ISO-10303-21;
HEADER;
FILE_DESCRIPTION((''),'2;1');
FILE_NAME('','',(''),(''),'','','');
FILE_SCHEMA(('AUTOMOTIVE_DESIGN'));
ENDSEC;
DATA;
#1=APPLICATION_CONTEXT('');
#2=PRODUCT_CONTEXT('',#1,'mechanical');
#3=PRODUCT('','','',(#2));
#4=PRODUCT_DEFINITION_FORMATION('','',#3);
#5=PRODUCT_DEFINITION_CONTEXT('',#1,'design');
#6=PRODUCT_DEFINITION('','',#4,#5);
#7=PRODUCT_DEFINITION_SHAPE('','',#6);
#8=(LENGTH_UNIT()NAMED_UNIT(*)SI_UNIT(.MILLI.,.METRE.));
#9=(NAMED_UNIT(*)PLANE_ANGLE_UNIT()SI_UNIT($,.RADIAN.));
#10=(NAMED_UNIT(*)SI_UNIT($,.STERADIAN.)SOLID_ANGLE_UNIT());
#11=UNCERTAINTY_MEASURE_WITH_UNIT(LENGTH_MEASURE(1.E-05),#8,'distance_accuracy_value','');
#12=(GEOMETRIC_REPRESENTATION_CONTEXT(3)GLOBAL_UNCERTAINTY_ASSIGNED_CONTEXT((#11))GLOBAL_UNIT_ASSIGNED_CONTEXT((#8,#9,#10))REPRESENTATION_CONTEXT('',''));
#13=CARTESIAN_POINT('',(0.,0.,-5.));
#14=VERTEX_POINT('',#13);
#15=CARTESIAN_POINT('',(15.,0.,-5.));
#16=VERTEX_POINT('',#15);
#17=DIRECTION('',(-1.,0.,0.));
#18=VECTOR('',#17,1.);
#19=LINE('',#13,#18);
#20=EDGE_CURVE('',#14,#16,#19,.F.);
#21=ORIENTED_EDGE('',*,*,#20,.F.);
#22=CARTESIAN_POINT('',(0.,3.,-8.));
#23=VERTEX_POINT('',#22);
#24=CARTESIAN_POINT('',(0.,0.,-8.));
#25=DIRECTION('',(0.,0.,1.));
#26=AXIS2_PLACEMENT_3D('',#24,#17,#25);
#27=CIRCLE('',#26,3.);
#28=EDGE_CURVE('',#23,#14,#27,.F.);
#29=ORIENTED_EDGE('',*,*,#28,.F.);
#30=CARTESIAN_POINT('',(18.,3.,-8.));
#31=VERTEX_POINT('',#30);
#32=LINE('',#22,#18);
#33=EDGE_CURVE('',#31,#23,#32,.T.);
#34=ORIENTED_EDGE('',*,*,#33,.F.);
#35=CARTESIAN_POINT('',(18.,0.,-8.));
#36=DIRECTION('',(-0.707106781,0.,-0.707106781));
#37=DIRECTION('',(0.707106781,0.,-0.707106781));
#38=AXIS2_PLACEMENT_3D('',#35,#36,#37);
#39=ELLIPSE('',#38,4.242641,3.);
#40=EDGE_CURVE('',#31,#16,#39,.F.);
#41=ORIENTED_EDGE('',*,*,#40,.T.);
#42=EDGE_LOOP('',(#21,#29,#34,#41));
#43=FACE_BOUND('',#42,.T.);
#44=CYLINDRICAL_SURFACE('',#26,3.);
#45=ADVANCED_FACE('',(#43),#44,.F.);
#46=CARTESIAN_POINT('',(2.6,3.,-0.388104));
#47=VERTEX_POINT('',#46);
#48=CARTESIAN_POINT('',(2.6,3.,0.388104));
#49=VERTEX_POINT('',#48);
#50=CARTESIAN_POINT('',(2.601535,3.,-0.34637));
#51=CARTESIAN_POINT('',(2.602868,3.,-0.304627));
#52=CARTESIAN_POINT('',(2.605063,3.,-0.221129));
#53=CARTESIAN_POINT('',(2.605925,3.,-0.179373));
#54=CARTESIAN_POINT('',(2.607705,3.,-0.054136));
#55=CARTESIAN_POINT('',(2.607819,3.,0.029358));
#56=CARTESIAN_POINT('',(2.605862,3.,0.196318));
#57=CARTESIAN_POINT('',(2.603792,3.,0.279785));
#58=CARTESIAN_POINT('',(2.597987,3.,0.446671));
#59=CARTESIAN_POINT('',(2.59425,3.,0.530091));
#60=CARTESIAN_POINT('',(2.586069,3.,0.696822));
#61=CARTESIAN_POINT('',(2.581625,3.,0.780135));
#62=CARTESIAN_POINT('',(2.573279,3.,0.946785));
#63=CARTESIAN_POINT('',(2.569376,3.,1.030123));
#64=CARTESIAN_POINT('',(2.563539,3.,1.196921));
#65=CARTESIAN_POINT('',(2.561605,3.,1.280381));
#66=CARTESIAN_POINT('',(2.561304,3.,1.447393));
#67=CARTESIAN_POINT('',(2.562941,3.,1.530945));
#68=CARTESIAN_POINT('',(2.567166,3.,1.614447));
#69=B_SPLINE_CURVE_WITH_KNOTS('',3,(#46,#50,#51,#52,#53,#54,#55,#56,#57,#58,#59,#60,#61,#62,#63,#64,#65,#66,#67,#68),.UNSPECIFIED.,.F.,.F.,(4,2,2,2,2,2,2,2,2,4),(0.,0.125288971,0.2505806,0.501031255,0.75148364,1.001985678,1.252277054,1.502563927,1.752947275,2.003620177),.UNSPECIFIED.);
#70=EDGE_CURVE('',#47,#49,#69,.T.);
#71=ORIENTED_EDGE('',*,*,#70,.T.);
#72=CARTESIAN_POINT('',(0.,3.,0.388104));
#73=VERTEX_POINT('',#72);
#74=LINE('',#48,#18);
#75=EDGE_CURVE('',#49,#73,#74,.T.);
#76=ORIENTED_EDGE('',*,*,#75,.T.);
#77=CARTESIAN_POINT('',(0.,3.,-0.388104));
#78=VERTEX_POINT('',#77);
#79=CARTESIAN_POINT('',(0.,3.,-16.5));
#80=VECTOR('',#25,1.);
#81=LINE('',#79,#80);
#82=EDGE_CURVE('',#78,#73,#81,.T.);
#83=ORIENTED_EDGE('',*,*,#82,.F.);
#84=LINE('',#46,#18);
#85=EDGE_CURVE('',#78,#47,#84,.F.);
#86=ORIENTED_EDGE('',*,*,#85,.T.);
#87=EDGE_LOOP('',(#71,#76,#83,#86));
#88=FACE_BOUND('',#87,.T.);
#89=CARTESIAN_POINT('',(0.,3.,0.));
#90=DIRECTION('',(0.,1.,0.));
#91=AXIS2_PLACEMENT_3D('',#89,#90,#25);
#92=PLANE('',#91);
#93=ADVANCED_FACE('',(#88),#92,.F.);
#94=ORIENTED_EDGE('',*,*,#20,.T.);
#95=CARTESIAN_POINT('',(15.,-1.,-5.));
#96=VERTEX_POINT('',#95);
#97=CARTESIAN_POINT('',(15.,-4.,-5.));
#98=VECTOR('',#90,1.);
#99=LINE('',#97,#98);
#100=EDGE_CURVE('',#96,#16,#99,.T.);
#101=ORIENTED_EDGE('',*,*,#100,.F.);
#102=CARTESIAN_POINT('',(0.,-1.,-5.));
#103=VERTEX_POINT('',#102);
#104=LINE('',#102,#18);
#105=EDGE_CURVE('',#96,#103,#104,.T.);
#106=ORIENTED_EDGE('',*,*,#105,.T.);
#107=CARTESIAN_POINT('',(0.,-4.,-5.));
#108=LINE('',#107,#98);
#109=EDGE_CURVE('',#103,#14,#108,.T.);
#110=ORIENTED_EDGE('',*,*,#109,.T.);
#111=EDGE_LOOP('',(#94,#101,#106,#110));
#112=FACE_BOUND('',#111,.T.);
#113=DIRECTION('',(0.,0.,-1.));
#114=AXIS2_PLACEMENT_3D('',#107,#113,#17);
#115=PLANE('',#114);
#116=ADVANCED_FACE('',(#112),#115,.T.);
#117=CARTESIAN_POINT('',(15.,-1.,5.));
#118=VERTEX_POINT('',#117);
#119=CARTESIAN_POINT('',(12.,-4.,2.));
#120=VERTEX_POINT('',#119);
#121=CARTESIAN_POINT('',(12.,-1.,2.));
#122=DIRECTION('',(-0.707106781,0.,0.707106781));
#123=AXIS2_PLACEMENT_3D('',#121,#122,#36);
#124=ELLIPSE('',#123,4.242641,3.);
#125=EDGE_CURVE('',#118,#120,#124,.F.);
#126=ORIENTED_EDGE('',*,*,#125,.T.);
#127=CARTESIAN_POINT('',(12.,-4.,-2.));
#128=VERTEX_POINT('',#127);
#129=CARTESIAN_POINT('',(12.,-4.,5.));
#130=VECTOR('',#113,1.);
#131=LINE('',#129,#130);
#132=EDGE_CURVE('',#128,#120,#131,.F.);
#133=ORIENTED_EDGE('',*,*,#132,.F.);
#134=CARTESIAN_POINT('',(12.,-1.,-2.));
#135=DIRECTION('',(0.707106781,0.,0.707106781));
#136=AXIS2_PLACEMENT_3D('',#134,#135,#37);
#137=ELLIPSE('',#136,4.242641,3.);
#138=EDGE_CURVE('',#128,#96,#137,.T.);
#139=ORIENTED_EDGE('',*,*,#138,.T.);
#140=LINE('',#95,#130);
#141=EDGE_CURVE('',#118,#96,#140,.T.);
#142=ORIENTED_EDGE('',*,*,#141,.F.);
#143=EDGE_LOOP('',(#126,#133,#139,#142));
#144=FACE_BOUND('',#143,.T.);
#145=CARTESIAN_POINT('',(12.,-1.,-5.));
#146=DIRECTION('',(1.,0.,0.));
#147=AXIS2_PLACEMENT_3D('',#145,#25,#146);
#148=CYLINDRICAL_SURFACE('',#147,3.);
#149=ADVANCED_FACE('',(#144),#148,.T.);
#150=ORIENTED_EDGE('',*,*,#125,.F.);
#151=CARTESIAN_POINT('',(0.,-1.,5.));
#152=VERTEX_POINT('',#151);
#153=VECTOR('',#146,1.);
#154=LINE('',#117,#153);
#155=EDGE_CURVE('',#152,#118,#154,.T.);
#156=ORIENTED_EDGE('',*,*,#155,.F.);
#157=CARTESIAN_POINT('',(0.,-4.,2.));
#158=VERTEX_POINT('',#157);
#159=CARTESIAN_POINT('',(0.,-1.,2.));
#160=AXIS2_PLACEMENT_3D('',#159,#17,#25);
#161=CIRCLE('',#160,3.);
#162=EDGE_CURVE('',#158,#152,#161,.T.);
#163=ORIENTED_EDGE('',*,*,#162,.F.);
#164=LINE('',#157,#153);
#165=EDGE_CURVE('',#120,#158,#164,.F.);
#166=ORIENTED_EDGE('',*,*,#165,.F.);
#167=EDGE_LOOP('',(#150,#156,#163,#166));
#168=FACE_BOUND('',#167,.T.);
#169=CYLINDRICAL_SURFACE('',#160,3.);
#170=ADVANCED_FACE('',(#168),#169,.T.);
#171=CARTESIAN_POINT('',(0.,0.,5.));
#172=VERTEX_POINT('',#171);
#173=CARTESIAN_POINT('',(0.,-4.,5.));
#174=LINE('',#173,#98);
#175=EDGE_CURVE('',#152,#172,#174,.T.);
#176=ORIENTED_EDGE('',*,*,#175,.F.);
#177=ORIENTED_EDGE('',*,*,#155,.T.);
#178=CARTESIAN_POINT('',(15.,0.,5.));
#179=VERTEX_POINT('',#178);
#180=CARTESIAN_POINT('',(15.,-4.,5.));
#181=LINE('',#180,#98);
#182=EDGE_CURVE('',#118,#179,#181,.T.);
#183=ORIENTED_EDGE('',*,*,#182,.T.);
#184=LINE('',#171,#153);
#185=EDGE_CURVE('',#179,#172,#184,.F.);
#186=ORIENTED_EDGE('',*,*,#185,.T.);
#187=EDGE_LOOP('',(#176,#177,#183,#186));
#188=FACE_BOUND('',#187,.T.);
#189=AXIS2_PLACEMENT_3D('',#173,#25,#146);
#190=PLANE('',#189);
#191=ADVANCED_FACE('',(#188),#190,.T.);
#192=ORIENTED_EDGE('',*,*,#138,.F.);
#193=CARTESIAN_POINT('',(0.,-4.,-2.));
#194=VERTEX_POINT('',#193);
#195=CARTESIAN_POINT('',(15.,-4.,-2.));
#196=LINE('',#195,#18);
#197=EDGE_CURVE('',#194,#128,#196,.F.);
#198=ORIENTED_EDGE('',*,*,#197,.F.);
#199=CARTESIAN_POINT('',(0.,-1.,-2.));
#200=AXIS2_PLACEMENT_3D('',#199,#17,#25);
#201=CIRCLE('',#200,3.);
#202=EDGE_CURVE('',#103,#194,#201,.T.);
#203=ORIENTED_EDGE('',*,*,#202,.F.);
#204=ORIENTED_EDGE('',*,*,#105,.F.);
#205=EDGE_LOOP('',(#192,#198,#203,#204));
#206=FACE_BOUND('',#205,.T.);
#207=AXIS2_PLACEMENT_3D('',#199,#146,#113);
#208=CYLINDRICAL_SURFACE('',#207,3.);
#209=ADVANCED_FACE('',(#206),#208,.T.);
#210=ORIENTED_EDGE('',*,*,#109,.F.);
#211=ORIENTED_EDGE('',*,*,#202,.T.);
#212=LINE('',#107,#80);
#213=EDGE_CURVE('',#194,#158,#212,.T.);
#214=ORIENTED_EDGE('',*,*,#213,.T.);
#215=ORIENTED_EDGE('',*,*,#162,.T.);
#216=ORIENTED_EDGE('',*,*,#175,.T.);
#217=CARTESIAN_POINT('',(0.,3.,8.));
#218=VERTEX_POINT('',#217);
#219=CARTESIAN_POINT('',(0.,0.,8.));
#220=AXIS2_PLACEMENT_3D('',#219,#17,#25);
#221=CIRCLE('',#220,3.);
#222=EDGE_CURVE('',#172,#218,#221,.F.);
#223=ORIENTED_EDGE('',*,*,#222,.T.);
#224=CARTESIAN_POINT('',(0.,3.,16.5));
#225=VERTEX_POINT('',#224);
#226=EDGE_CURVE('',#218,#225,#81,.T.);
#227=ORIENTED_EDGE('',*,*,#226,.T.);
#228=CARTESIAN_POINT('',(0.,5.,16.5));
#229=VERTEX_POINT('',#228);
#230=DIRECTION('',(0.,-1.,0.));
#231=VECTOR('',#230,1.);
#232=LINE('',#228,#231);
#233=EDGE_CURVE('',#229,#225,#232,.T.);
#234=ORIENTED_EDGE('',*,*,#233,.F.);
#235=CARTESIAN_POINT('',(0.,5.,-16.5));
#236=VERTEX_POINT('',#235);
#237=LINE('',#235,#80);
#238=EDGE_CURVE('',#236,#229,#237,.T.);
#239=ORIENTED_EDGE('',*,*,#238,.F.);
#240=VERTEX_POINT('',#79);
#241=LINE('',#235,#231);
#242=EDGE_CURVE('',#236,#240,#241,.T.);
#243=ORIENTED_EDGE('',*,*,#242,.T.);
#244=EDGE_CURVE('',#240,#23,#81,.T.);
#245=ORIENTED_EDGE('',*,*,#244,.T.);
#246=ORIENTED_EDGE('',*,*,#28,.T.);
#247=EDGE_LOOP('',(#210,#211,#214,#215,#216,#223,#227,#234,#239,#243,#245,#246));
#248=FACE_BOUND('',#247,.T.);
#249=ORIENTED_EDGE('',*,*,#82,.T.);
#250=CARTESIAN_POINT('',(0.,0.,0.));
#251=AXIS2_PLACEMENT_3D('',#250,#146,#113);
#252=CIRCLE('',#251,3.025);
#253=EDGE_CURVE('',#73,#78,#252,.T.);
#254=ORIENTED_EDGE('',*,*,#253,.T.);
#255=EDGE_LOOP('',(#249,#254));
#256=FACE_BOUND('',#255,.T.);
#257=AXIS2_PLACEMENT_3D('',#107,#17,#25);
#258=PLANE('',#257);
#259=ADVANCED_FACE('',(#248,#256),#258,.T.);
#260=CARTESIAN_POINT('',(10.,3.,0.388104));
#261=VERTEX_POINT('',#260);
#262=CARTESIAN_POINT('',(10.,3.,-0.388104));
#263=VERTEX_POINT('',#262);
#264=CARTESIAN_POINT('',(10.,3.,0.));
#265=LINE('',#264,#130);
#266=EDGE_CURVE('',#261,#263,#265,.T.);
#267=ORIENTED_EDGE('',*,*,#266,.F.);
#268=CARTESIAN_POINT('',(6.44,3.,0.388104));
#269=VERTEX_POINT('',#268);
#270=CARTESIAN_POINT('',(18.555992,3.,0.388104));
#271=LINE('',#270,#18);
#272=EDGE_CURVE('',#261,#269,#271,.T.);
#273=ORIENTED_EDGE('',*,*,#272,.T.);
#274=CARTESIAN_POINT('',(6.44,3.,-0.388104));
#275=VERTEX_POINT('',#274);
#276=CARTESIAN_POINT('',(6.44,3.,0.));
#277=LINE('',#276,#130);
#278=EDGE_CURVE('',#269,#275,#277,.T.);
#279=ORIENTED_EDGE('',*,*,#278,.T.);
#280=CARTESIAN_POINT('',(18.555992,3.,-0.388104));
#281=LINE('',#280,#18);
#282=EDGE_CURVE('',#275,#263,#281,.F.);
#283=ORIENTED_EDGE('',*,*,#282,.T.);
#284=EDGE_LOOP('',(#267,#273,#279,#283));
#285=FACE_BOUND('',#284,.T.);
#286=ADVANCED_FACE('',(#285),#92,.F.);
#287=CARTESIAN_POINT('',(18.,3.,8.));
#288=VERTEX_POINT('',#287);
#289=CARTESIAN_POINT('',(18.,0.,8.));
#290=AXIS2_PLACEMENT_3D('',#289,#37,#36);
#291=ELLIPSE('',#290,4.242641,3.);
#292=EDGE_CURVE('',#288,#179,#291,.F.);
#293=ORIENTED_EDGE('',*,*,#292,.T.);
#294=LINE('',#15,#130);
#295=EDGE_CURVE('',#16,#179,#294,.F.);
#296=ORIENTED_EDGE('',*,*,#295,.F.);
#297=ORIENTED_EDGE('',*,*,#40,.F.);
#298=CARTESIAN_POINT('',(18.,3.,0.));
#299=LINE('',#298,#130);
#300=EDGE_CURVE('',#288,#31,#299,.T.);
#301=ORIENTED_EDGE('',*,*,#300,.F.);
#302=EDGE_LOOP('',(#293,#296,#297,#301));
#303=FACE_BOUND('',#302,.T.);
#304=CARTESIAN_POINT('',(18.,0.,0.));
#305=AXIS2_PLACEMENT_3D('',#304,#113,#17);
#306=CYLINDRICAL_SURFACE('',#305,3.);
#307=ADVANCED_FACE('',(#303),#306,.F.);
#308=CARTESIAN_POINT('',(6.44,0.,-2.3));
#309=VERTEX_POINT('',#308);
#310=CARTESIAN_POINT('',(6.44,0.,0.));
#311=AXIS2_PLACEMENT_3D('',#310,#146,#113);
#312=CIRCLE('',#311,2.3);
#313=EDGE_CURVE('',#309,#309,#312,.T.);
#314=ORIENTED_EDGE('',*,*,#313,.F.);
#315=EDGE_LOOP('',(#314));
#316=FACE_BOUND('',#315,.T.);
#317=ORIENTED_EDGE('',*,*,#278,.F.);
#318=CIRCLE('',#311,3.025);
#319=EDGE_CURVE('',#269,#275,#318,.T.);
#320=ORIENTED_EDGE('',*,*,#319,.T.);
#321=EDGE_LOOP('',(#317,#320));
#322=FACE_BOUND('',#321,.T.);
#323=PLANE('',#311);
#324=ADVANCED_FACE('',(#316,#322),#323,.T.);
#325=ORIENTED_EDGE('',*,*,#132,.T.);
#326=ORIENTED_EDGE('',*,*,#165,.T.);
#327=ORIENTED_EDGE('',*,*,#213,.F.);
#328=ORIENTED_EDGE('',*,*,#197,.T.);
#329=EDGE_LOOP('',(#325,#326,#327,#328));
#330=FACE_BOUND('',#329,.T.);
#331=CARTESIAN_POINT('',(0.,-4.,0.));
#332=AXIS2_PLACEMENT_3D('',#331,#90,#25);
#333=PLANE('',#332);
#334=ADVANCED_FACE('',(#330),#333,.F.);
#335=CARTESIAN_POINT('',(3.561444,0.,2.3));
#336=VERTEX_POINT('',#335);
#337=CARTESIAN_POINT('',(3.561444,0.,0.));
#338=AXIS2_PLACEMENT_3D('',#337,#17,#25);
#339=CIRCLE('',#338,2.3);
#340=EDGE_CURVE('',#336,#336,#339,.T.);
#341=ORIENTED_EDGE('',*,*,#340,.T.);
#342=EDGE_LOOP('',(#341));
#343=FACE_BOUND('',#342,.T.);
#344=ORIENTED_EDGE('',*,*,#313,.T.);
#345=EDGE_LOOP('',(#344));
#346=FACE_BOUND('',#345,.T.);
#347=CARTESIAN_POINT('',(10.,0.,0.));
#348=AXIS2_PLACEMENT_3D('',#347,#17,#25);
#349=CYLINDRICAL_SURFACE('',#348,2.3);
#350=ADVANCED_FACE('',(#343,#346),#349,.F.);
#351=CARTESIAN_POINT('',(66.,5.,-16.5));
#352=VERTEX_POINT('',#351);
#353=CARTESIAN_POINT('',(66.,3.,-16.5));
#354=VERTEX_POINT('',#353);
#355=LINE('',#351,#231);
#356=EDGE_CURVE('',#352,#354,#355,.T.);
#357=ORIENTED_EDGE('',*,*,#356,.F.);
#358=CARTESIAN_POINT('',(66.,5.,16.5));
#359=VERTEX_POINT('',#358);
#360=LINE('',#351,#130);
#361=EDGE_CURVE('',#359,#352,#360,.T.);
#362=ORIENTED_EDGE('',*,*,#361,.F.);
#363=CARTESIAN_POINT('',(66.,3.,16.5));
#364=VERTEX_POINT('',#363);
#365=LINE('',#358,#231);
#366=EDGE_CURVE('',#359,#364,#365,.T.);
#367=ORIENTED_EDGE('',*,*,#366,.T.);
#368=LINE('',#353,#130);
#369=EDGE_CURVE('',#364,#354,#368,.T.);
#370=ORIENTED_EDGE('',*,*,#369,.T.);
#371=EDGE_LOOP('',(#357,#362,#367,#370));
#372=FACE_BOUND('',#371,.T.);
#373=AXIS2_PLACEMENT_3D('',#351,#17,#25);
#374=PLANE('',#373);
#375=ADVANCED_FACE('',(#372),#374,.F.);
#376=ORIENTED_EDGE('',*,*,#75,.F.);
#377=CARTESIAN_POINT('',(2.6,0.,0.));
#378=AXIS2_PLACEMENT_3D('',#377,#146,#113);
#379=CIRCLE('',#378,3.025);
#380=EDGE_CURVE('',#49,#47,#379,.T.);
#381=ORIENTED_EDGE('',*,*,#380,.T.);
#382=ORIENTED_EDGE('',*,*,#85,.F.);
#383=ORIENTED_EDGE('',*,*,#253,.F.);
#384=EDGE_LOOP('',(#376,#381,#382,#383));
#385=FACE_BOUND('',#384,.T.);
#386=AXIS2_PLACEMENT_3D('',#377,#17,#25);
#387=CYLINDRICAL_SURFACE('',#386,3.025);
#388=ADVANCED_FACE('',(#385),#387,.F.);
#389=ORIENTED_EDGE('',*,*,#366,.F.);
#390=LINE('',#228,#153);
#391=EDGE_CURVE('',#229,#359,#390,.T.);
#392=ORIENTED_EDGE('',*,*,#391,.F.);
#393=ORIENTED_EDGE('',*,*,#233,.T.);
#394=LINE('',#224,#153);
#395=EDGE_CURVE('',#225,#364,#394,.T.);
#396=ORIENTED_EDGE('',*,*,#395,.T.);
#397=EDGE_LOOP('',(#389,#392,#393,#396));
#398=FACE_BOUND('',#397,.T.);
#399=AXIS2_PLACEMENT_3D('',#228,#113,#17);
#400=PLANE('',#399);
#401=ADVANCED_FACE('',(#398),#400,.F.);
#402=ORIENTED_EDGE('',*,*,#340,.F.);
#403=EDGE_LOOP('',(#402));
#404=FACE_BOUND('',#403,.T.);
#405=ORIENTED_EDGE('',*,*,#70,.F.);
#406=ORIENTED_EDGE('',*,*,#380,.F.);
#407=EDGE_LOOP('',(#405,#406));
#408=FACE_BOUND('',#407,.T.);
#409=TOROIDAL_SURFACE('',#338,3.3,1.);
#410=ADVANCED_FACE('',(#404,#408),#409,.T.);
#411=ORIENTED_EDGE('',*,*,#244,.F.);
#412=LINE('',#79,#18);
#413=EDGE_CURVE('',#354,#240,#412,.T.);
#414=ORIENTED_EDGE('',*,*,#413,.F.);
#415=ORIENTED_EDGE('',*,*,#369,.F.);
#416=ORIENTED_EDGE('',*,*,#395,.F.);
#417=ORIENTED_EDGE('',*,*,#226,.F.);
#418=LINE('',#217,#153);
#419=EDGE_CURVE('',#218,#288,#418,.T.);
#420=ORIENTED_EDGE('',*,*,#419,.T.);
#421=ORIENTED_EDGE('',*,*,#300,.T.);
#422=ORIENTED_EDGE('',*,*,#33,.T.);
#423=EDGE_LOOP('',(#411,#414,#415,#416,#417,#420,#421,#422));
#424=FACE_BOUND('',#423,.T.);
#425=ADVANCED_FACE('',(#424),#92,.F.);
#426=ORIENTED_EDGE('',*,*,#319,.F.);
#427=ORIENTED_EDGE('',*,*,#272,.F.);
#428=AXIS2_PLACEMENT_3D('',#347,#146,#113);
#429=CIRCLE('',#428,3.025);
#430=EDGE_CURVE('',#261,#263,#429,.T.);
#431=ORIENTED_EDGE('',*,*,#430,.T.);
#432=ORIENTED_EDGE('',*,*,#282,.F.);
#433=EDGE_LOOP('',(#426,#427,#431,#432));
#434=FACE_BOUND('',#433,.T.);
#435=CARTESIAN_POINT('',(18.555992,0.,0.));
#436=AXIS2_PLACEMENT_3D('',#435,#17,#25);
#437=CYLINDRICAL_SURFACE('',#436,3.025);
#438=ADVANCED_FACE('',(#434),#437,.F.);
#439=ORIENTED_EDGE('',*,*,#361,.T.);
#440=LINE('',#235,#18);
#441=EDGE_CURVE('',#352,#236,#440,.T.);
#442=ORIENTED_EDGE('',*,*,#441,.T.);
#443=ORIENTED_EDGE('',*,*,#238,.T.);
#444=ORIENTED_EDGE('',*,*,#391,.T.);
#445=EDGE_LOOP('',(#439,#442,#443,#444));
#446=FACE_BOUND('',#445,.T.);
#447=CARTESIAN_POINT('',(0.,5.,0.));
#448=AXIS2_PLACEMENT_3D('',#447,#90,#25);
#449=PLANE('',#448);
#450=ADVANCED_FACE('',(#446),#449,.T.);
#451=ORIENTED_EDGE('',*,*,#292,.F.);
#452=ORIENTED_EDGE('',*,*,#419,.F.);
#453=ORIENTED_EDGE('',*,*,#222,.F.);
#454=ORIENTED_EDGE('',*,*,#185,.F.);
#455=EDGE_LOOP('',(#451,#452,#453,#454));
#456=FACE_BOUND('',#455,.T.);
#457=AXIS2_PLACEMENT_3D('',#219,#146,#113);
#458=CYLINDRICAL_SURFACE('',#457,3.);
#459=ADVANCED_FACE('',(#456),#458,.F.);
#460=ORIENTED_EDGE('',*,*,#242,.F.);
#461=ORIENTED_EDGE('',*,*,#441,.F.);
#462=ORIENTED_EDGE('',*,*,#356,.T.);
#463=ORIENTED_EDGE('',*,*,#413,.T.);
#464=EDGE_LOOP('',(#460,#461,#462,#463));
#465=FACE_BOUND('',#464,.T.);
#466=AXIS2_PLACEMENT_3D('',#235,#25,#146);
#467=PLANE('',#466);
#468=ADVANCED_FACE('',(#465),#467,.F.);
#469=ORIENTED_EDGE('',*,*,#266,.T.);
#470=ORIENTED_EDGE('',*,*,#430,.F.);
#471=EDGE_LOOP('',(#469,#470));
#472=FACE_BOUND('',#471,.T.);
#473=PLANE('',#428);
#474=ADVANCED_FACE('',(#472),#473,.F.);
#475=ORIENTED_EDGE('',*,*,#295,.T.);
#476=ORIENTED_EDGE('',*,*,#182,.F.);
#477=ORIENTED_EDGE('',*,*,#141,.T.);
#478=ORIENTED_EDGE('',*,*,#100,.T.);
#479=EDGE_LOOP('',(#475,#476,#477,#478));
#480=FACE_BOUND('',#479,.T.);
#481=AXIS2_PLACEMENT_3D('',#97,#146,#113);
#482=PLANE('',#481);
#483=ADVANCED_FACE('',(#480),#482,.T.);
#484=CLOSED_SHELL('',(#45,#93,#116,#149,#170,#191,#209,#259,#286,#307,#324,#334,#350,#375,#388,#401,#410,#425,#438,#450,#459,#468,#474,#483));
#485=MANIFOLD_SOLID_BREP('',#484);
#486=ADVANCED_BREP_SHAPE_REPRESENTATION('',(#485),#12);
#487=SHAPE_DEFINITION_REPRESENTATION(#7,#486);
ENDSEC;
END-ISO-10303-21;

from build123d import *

# Parameters (mm, degrees)
BOSS_EXTRUDE1_DEPTH      = 3
BOSS_EXTRUDE1_DEPTH_BACK = 4
SKETCH1_W                = 15
SKETCH1_H                = 10
SKETCH2_R                = 2.3
CUT_EXTRUDE3_DEPTH       = 10
SKETCH2_4_R              = 3.025
SKETCH2_4_R_2            = 2.3
CUT_EXTRUDE4_DEPTH       = 2.6
CUT_EXTRUDE5_START       = 6.44
SKETCH2_5_R              = 3.025
SKETCH2_5_R_2            = 2.3
CUT_EXTRUDE5_DEPTH       = 3.56
SKETCH3_W                = 66
SKETCH3_H                = 33
BOSS_EXTRUDE2_DEPTH      = 2
FILLET2_R                = 3
FILLET3_R                = 3


with BuildPart() as part:
    # Sketch1 → Boss-Extrude1 (new, two sides: drawn at the far end of the back side and taken through both)
    with BuildSketch(Plane(origin=(0, 0, 0), x_dir=(1, 0, 0), z_dir=(0, 1, 0)).offset(-BOSS_EXTRUDE1_DEPTH_BACK)):
        with Locations((7.5, 0)):
            Rectangle(SKETCH1_W, SKETCH1_H)
    extrude(amount=BOSS_EXTRUDE1_DEPTH + BOSS_EXTRUDE1_DEPTH_BACK)

    # Sketch2 → Cut-Extrude3 (cut)
    with BuildSketch(Plane(origin=(0, 0, 0), x_dir=(0, 0, -1), z_dir=(1, 0, 0))):
        Circle(SKETCH2_R)
    extrude(amount=CUT_EXTRUDE3_DEPTH, mode=Mode.SUBTRACT)

    # Sketch2<4> → Cut-Extrude4 (cut)
    with BuildSketch(Plane(origin=(0, 0, 0), x_dir=(0, 0, -1), z_dir=(1, 0, 0))):
        Circle(SKETCH2_4_R)
        Circle(SKETCH2_4_R_2, mode=Mode.SUBTRACT)
    extrude(amount=CUT_EXTRUDE4_DEPTH, mode=Mode.SUBTRACT)

    # Sketch2<5> → Cut-Extrude5 (cut)
    with BuildSketch(Plane(origin=(0, 0, 0), x_dir=(0, 0, -1), z_dir=(1, 0, 0)).offset(CUT_EXTRUDE5_START)):
        Circle(SKETCH2_5_R)
        Circle(SKETCH2_5_R_2, mode=Mode.SUBTRACT)
    extrude(amount=CUT_EXTRUDE5_DEPTH, mode=Mode.SUBTRACT)

    # Fillet1: read off the stored shape, not the designer's step
    # Fillet1 outline → Fillet1 (revolve, cut)
    with BuildSketch(Plane.YX):
        with BuildLine():
            Line((2.3, 2.6), (3.025000061, 2.599999982))
            ThreePointArc((3.025000061, 2.599999982), (2.501564048, 2.959364472), (2.3, 3.561444226))
            Line((2.3, 3.561444226), (2.3, 2.6))
        make_face()
    revolve(axis=Axis((0, 0, 0), (1, 0, 0)), mode=Mode.SUBTRACT)

    # Sketch3 → Boss-Extrude2 (add)
    with BuildSketch(Plane(origin=(0, 3, 0), x_dir=(1, 0, 0), z_dir=(0, 1, 0))):
        with Locations((33, 0)):
            Rectangle(SKETCH3_W, SKETCH3_H)
    extrude(amount=BOSS_EXTRUDE2_DEPTH)

    # Fillet2
    fillet2_edges = [part.edges().sort_by_distance(p)[0] for p in [
        (7.5, 3, 5),
        (15, 3, 0),
        (7.5, 3, -5),
    ]]
    fillet(fillet2_edges, radius=FILLET2_R)

    # Fillet3
    fillet3_edges = [part.edges().sort_by_distance(p)[0] for p in [
        (15, -4, 0),
        (7.5, -4, -5),
        (7.5, -4, 5),
    ]]
    fillet(fillet3_edges, radius=FILLET3_R)


solid = part.part
